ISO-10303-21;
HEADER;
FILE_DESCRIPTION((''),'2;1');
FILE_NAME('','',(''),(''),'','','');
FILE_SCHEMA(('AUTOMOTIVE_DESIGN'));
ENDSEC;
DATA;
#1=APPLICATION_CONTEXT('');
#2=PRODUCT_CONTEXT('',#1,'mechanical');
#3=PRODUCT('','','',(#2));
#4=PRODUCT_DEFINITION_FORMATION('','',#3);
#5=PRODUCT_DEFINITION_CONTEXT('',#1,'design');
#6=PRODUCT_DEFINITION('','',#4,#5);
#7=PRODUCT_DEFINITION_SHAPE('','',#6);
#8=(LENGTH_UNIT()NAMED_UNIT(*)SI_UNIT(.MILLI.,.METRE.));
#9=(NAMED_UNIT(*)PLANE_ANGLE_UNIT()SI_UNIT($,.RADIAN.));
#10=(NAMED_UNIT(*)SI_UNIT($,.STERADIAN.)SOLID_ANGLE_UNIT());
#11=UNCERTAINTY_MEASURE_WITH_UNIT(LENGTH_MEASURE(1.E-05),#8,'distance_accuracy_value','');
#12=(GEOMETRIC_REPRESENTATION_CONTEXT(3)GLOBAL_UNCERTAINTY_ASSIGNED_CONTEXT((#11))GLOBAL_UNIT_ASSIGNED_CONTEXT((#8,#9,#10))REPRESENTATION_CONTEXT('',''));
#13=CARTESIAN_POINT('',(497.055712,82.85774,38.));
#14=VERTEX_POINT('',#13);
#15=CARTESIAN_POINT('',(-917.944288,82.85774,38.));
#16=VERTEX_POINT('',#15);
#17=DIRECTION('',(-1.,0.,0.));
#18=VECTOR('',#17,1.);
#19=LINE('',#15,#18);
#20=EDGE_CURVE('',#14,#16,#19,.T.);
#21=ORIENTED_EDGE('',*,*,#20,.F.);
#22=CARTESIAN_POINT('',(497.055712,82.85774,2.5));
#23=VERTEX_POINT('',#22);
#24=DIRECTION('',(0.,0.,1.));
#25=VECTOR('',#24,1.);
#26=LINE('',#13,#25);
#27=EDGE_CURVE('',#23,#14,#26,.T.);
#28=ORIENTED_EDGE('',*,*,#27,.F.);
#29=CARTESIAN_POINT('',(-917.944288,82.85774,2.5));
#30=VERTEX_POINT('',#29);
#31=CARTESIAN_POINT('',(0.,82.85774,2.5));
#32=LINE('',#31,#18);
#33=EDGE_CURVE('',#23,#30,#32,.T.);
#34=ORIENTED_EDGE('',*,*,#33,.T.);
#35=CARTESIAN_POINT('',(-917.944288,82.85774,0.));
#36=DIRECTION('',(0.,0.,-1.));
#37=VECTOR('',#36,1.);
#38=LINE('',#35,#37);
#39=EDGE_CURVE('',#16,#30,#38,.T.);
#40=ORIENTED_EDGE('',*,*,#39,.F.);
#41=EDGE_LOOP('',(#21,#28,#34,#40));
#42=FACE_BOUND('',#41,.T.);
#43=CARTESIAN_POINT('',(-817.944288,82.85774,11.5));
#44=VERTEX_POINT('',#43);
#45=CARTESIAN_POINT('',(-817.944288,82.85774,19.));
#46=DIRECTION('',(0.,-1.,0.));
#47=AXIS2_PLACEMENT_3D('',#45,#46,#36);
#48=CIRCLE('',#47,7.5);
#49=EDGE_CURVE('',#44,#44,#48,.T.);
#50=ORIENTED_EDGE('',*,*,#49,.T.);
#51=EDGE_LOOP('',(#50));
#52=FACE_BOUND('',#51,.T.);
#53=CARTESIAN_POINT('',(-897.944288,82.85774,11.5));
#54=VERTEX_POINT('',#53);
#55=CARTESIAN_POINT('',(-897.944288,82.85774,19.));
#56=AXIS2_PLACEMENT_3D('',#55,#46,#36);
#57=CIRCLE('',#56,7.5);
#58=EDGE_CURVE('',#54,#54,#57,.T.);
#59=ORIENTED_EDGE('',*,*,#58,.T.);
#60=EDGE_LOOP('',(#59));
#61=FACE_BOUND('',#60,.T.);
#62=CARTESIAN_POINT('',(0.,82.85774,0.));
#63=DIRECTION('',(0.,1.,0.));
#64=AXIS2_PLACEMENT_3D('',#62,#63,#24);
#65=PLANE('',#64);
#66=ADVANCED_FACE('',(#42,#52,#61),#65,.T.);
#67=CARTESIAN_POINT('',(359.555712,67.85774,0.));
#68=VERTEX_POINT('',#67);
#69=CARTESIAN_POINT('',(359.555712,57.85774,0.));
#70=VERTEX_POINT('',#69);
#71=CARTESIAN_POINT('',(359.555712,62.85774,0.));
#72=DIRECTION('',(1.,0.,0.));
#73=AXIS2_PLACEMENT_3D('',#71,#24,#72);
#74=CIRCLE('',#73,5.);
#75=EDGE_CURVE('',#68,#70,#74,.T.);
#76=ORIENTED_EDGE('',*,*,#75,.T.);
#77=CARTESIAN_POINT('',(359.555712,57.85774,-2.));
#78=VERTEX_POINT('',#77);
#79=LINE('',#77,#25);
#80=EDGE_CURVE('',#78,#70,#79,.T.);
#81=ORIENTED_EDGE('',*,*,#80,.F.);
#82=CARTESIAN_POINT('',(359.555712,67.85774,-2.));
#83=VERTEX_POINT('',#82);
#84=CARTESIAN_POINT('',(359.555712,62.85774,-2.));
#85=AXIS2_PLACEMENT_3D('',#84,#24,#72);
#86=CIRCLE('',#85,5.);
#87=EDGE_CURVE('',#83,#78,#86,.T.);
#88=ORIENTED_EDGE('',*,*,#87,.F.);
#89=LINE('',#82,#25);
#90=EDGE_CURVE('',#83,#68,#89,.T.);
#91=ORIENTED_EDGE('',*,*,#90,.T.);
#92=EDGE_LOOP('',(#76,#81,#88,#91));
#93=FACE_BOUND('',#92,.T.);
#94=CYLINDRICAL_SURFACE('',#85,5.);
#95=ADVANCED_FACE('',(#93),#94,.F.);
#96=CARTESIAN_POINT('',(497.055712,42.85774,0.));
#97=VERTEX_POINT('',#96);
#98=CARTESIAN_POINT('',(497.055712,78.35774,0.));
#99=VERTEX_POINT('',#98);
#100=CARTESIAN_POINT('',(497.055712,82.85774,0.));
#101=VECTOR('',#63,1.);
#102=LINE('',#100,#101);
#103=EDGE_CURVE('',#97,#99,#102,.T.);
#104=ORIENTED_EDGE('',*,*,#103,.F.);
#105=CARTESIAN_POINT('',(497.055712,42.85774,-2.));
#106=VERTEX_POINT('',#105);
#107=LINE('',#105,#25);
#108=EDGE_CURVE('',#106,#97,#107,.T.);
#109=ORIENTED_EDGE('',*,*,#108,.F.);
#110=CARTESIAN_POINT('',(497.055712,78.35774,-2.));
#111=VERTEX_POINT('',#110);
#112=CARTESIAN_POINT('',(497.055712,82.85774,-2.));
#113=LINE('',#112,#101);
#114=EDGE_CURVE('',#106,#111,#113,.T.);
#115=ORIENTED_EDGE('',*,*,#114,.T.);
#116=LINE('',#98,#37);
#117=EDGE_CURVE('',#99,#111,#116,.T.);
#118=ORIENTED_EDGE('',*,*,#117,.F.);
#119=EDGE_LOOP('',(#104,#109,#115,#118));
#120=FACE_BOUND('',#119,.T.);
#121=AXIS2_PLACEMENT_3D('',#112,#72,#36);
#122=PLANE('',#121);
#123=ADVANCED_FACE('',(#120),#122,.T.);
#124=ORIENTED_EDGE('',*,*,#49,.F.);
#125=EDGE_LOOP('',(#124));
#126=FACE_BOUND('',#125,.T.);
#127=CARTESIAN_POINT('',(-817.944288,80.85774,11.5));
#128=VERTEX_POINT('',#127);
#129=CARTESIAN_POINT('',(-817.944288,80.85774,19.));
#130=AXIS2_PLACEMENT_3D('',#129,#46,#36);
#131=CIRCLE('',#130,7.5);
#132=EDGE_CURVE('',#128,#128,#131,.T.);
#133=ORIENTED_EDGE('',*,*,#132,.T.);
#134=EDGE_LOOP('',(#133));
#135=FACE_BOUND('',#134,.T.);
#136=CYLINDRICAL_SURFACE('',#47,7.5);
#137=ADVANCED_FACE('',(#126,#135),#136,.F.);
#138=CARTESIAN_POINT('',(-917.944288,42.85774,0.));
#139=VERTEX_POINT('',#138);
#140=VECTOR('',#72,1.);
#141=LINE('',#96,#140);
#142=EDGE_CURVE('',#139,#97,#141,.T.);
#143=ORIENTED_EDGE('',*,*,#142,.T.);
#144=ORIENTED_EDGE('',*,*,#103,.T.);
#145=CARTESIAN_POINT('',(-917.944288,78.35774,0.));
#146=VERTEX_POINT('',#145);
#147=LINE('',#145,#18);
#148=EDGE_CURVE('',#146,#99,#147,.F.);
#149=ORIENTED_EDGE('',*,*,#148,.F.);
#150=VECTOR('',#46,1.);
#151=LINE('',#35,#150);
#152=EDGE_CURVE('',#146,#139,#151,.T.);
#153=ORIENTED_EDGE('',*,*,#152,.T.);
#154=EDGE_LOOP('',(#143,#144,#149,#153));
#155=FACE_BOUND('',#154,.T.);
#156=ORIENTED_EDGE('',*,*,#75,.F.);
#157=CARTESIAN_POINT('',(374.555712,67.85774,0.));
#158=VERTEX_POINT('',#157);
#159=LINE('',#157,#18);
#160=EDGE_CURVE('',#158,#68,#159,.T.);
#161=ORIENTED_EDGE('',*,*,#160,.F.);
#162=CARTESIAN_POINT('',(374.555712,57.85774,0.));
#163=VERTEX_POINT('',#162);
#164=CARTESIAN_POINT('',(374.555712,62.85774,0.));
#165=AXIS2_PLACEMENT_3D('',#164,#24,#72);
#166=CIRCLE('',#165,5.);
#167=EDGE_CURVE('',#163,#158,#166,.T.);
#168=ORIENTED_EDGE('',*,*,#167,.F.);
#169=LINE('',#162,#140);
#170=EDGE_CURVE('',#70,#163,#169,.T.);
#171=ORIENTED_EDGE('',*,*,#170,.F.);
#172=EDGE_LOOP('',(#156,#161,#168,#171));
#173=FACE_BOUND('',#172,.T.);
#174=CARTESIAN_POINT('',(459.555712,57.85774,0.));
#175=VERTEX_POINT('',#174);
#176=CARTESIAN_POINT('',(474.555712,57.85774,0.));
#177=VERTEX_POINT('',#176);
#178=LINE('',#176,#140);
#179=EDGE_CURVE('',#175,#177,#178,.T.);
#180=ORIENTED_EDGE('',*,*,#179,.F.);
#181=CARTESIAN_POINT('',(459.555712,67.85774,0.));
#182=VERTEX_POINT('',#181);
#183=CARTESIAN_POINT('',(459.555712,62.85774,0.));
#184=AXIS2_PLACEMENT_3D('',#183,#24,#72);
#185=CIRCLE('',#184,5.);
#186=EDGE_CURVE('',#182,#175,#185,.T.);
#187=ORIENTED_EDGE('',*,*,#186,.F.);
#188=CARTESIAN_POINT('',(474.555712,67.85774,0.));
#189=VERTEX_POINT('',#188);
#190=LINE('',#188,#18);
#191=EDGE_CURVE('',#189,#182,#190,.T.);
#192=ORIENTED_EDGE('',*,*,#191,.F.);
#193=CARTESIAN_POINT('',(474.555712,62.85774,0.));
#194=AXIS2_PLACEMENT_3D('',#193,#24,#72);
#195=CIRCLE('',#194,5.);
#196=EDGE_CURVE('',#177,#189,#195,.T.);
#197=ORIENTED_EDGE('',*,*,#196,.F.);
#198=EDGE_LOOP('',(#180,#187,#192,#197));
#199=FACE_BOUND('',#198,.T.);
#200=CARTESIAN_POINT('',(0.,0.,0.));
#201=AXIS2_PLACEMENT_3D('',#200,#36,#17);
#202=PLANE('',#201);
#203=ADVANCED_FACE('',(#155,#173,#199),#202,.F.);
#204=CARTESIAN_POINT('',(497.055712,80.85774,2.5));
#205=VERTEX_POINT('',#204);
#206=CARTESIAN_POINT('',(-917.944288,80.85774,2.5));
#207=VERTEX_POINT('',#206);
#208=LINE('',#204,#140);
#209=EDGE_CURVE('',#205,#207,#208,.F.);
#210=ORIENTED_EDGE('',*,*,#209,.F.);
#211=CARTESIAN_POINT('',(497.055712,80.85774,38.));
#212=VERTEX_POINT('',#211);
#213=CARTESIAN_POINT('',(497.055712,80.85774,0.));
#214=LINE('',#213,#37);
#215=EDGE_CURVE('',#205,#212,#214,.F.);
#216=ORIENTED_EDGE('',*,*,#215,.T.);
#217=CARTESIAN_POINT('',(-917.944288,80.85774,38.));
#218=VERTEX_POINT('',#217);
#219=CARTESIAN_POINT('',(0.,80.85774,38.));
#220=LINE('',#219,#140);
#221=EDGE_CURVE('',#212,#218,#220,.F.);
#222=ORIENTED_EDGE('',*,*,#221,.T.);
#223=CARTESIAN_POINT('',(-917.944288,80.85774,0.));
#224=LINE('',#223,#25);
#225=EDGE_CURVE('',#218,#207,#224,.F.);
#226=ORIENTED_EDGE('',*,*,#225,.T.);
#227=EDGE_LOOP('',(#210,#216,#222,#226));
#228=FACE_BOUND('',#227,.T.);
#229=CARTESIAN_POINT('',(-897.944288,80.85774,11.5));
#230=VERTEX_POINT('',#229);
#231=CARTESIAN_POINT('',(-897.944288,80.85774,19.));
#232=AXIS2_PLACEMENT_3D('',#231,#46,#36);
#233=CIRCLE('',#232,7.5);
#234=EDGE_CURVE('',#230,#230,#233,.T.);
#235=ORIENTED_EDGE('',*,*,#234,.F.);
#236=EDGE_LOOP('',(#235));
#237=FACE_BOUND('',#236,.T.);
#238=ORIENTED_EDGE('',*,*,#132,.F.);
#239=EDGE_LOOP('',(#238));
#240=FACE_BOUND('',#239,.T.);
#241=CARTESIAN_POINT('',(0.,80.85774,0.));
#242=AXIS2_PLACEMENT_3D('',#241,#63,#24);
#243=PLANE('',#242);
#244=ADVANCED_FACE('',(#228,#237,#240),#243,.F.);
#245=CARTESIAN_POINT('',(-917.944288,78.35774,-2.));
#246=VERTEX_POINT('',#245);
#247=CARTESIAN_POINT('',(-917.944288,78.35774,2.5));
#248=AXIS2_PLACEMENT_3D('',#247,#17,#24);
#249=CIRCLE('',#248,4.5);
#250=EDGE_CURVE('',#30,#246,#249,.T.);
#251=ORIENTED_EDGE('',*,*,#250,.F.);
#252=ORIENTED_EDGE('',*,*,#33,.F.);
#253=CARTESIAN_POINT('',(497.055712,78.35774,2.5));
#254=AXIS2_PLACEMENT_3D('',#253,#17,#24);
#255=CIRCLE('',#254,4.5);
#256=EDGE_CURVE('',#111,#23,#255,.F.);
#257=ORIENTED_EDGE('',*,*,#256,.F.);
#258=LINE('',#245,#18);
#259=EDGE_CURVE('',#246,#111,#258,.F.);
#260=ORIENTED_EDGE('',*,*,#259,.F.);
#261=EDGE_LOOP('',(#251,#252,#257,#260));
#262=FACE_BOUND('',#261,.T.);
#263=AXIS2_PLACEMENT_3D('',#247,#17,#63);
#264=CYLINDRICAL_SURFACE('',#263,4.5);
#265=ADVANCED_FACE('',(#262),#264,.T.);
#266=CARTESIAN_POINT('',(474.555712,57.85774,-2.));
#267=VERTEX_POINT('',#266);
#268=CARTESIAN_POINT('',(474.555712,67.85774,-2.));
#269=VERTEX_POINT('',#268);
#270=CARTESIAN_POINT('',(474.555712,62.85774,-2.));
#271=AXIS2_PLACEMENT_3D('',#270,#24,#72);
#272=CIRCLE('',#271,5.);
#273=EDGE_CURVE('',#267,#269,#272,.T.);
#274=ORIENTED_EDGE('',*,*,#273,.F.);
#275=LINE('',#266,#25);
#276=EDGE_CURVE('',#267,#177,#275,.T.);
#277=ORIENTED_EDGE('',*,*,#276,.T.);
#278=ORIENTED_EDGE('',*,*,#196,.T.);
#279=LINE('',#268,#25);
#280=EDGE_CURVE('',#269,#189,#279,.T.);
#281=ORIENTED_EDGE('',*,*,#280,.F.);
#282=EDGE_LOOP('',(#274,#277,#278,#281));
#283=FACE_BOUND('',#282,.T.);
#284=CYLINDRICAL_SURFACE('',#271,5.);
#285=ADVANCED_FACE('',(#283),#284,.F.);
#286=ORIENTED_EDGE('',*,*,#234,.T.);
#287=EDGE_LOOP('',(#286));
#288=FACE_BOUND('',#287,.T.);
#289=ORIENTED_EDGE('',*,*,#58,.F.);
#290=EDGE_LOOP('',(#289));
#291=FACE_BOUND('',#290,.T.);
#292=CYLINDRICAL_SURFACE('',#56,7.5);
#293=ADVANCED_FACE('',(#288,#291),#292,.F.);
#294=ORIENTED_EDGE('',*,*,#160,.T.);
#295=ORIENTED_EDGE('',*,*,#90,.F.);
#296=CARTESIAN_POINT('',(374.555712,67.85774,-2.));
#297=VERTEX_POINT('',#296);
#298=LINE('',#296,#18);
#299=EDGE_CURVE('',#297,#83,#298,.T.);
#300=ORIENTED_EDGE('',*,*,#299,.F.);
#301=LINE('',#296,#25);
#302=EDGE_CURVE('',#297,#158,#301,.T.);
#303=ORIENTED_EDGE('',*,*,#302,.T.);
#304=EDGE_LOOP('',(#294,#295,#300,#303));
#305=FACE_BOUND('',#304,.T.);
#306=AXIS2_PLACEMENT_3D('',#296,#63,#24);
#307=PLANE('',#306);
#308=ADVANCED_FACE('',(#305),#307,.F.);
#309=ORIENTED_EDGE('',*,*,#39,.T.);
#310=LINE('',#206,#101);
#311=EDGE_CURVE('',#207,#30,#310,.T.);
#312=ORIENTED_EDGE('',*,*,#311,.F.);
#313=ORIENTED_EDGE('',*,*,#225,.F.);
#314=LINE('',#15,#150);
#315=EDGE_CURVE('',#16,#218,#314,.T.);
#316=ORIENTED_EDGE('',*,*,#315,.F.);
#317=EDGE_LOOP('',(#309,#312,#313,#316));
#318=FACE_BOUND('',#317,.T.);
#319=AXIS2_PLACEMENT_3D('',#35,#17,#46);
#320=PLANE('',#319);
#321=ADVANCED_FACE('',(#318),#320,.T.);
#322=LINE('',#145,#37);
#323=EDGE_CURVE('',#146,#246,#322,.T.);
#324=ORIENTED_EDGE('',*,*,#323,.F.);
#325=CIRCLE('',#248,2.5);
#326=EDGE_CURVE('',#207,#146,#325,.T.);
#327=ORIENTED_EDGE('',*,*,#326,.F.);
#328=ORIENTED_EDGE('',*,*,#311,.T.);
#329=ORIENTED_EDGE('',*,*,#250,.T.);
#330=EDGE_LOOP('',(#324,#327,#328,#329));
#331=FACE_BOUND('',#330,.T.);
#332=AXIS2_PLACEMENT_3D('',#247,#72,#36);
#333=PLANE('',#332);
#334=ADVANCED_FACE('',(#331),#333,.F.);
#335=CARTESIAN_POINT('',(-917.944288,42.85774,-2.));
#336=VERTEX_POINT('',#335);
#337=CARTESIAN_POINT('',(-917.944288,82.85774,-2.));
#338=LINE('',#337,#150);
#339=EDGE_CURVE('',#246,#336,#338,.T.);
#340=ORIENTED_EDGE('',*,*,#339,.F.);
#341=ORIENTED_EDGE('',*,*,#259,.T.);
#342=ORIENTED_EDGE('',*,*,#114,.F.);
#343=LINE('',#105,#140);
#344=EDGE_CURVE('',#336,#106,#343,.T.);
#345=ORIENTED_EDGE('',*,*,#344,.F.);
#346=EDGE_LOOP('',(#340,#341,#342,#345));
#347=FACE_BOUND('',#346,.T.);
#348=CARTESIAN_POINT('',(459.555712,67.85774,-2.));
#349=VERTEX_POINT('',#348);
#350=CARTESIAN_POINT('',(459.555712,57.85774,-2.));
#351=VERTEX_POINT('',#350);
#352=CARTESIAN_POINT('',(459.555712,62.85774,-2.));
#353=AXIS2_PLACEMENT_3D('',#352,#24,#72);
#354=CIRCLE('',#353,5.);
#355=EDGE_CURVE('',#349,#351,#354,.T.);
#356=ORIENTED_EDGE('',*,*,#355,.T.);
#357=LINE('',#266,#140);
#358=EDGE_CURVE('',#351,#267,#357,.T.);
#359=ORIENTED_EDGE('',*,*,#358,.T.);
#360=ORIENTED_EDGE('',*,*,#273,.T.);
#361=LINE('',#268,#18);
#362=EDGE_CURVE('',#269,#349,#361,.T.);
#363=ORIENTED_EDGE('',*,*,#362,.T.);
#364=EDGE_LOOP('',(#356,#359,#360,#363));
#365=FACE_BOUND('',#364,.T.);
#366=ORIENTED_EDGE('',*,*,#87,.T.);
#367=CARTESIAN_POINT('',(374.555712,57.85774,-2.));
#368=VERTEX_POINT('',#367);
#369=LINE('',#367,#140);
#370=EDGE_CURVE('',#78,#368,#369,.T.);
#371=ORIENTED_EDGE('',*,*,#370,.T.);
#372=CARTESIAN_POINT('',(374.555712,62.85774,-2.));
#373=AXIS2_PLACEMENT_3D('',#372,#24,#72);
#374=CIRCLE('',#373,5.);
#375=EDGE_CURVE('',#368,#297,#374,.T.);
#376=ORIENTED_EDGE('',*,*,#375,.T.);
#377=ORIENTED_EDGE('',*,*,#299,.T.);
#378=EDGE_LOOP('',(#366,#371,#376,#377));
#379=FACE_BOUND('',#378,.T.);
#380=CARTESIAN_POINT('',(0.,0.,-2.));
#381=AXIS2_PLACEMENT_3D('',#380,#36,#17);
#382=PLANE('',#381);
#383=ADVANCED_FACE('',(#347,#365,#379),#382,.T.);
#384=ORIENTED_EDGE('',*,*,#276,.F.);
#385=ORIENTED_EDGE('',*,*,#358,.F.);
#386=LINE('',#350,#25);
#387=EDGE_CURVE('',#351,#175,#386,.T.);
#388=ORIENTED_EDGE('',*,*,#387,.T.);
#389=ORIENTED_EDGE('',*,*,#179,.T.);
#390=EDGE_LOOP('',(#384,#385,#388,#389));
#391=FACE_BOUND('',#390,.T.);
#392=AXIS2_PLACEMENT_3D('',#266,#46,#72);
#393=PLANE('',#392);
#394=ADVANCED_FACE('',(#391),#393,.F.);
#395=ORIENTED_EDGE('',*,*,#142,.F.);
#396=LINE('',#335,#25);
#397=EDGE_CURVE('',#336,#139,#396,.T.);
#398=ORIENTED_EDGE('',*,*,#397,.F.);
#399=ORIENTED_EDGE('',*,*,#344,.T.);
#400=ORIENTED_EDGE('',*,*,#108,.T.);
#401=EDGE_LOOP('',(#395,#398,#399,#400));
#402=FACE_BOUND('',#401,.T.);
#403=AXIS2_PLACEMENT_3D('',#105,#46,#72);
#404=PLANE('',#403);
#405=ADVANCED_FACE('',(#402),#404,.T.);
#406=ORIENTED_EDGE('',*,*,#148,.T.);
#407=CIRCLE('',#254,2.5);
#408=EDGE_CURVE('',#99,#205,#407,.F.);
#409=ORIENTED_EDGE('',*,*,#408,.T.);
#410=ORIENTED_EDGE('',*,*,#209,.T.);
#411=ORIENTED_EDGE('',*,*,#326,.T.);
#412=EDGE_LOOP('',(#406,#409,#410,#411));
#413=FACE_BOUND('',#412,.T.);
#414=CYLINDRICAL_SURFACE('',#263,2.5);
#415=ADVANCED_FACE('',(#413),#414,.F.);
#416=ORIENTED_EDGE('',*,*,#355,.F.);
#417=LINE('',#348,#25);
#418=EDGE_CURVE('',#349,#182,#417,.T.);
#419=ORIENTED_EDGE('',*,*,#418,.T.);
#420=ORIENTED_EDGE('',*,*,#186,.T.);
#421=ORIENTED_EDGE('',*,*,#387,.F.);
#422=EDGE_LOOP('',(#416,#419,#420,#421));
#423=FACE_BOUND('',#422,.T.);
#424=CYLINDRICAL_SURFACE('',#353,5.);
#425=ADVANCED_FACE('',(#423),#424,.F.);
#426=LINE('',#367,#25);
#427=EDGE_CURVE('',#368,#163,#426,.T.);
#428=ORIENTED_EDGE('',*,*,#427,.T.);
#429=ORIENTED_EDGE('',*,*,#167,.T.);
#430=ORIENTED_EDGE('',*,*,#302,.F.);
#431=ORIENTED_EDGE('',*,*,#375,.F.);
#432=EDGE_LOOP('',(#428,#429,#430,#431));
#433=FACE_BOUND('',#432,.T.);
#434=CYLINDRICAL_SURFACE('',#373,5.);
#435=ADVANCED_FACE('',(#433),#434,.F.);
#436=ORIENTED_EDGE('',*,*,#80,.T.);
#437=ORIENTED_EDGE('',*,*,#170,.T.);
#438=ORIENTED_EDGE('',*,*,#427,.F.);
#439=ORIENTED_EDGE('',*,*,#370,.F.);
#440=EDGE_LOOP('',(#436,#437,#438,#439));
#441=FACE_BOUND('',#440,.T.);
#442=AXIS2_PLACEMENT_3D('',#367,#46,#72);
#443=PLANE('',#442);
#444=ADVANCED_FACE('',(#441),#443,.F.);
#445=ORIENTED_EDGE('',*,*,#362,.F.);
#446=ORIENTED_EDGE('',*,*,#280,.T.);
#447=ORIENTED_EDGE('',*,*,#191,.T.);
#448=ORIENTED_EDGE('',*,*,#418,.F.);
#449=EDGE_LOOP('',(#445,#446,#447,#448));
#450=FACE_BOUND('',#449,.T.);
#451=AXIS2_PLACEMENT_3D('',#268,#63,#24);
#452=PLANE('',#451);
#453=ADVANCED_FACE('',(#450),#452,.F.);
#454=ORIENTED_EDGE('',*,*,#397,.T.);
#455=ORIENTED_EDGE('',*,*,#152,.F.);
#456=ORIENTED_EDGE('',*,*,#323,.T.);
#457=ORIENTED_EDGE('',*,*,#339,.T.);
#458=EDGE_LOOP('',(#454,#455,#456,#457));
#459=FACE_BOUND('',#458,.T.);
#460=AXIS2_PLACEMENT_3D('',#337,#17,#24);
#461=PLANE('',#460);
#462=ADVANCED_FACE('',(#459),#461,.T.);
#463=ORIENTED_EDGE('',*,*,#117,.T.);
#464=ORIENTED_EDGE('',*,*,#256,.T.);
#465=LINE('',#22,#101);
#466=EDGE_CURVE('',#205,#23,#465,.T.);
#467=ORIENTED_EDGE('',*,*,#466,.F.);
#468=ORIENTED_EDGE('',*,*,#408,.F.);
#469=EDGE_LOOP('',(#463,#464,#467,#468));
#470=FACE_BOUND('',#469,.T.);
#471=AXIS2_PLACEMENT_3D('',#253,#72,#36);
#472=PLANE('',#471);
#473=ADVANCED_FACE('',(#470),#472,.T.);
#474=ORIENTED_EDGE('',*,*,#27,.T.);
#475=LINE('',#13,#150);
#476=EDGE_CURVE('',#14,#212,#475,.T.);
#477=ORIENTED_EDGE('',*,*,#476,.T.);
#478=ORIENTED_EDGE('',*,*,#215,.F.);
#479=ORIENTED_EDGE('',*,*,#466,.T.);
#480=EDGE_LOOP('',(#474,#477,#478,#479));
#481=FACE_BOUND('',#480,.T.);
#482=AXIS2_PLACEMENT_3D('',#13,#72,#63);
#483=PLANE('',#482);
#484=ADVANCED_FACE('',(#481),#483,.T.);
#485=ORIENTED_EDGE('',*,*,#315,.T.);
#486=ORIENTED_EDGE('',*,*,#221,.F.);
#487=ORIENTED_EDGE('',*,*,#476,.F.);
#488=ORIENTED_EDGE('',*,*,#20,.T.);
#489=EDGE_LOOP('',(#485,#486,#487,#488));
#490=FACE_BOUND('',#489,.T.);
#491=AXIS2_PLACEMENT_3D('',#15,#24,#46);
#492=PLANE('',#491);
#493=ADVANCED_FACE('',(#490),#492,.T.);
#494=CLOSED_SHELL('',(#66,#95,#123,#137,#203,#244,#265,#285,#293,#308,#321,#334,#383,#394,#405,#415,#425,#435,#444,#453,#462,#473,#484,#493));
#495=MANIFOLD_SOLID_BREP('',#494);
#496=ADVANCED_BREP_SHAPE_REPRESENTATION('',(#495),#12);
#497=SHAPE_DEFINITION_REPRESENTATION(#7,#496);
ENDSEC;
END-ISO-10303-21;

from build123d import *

# Parameters (mm, degrees)
SKETCH1_W                    = 1415
SKETCH1_H                    = 40
BASE_FLANGE1_DEPTH           = 2
EDGE_FLANGE1_STRIP_W         = 13
EDGE_FLANGE1_STRIP_H         = 2
EDGE_FLANGE1_STRIP_CUT_DEPTH = 1415
EDGE_FLANGE1_DEPTH           = 1415
SKETCH9_R                    = 7.5
CUT_EXTRUDE1_DEPTH           = 920.516022359


# Sheet-metal steps are written as plain solids
with BuildPart() as part:
    # Sketch1 → Base-Flange1 (new body)
    with BuildSketch(Plane.XY):
        with Locations((-210.444287729, 62.85774027)):
            Rectangle(SKETCH1_W, SKETCH1_H)
        with BuildLine():
            Line((474.555712271, 57.85774027), (459.555712271, 57.85774027))
            ThreePointArc((459.555712271, 57.85774027), (454.555712271, 62.85774027), (459.555712271, 67.85774027))
            Line((459.555712271, 67.85774027), (474.555712271, 67.85774027))
            ThreePointArc((474.555712271, 67.85774027), (479.555712271, 62.85774027), (474.555712271, 57.85774027))
        make_face(mode=Mode.SUBTRACT)
        with BuildLine():
            Line((374.555712271, 57.85774027), (359.555712271, 57.85774027))
            ThreePointArc((359.555712271, 57.85774027), (354.555712271, 62.85774027), (359.555712271, 67.85774027))
            Line((359.555712271, 67.85774027), (374.555712271, 67.85774027))
            ThreePointArc((374.555712271, 67.85774027), (379.555712271, 62.85774027), (374.555712271, 57.85774027))
        make_face(mode=Mode.SUBTRACT)
    extrude(amount=-BASE_FLANGE1_DEPTH)

    # Edge-Flange1 strip (across the edge) → Edge-Flange1 strip cut (cut)
    with BuildSketch(Plane(origin=(497.055712271, 82.85774027, 0), x_dir=(0, -1, 0), z_dir=(-1, 0, 0))):
        with Locations((-2, -1)):
            Rectangle(EDGE_FLANGE1_STRIP_W, EDGE_FLANGE1_STRIP_H)
    extrude(amount=EDGE_FLANGE1_STRIP_CUT_DEPTH, mode=Mode.SUBTRACT)

    # Edge-Flange1 section (across the edge) → Edge-Flange1 (add)
    with BuildSketch(Plane(origin=(497.055712271, 82.85774027, 0), x_dir=(0, -1, 0), z_dir=(-1, 0, 0))):
        with BuildLine():
            Line((0, 2.5), (0, 38))
            Line((0, 38), (2, 38))
            Line((2, 38), (2, 2.5))
            ThreePointArc((2, 2.5), (2.732233047, 0.732233047), (4.5, 0))
            Line((4.5, 0), (4.5, -2))
            ThreePointArc((4.5, -2), (1.318019485, -0.681980515), (0, 2.5))
        make_face()
    extrude(amount=EDGE_FLANGE1_DEPTH)

    # Sketch9 → Cut-Extrude1 (cut, through all)
    with BuildSketch(Plane.XZ.offset(-80.85774027)):
        with Locations(Location((-897.944287729, 19, 0), (0, 0, 270))):
            Circle(SKETCH9_R)
        with Locations(Location((-817.944287729, 19, 0), (0, 0, 270))):
            Circle(SKETCH9_R)
    extrude(amount=-CUT_EXTRUDE1_DEPTH, mode=Mode.SUBTRACT)


solid = part.part
